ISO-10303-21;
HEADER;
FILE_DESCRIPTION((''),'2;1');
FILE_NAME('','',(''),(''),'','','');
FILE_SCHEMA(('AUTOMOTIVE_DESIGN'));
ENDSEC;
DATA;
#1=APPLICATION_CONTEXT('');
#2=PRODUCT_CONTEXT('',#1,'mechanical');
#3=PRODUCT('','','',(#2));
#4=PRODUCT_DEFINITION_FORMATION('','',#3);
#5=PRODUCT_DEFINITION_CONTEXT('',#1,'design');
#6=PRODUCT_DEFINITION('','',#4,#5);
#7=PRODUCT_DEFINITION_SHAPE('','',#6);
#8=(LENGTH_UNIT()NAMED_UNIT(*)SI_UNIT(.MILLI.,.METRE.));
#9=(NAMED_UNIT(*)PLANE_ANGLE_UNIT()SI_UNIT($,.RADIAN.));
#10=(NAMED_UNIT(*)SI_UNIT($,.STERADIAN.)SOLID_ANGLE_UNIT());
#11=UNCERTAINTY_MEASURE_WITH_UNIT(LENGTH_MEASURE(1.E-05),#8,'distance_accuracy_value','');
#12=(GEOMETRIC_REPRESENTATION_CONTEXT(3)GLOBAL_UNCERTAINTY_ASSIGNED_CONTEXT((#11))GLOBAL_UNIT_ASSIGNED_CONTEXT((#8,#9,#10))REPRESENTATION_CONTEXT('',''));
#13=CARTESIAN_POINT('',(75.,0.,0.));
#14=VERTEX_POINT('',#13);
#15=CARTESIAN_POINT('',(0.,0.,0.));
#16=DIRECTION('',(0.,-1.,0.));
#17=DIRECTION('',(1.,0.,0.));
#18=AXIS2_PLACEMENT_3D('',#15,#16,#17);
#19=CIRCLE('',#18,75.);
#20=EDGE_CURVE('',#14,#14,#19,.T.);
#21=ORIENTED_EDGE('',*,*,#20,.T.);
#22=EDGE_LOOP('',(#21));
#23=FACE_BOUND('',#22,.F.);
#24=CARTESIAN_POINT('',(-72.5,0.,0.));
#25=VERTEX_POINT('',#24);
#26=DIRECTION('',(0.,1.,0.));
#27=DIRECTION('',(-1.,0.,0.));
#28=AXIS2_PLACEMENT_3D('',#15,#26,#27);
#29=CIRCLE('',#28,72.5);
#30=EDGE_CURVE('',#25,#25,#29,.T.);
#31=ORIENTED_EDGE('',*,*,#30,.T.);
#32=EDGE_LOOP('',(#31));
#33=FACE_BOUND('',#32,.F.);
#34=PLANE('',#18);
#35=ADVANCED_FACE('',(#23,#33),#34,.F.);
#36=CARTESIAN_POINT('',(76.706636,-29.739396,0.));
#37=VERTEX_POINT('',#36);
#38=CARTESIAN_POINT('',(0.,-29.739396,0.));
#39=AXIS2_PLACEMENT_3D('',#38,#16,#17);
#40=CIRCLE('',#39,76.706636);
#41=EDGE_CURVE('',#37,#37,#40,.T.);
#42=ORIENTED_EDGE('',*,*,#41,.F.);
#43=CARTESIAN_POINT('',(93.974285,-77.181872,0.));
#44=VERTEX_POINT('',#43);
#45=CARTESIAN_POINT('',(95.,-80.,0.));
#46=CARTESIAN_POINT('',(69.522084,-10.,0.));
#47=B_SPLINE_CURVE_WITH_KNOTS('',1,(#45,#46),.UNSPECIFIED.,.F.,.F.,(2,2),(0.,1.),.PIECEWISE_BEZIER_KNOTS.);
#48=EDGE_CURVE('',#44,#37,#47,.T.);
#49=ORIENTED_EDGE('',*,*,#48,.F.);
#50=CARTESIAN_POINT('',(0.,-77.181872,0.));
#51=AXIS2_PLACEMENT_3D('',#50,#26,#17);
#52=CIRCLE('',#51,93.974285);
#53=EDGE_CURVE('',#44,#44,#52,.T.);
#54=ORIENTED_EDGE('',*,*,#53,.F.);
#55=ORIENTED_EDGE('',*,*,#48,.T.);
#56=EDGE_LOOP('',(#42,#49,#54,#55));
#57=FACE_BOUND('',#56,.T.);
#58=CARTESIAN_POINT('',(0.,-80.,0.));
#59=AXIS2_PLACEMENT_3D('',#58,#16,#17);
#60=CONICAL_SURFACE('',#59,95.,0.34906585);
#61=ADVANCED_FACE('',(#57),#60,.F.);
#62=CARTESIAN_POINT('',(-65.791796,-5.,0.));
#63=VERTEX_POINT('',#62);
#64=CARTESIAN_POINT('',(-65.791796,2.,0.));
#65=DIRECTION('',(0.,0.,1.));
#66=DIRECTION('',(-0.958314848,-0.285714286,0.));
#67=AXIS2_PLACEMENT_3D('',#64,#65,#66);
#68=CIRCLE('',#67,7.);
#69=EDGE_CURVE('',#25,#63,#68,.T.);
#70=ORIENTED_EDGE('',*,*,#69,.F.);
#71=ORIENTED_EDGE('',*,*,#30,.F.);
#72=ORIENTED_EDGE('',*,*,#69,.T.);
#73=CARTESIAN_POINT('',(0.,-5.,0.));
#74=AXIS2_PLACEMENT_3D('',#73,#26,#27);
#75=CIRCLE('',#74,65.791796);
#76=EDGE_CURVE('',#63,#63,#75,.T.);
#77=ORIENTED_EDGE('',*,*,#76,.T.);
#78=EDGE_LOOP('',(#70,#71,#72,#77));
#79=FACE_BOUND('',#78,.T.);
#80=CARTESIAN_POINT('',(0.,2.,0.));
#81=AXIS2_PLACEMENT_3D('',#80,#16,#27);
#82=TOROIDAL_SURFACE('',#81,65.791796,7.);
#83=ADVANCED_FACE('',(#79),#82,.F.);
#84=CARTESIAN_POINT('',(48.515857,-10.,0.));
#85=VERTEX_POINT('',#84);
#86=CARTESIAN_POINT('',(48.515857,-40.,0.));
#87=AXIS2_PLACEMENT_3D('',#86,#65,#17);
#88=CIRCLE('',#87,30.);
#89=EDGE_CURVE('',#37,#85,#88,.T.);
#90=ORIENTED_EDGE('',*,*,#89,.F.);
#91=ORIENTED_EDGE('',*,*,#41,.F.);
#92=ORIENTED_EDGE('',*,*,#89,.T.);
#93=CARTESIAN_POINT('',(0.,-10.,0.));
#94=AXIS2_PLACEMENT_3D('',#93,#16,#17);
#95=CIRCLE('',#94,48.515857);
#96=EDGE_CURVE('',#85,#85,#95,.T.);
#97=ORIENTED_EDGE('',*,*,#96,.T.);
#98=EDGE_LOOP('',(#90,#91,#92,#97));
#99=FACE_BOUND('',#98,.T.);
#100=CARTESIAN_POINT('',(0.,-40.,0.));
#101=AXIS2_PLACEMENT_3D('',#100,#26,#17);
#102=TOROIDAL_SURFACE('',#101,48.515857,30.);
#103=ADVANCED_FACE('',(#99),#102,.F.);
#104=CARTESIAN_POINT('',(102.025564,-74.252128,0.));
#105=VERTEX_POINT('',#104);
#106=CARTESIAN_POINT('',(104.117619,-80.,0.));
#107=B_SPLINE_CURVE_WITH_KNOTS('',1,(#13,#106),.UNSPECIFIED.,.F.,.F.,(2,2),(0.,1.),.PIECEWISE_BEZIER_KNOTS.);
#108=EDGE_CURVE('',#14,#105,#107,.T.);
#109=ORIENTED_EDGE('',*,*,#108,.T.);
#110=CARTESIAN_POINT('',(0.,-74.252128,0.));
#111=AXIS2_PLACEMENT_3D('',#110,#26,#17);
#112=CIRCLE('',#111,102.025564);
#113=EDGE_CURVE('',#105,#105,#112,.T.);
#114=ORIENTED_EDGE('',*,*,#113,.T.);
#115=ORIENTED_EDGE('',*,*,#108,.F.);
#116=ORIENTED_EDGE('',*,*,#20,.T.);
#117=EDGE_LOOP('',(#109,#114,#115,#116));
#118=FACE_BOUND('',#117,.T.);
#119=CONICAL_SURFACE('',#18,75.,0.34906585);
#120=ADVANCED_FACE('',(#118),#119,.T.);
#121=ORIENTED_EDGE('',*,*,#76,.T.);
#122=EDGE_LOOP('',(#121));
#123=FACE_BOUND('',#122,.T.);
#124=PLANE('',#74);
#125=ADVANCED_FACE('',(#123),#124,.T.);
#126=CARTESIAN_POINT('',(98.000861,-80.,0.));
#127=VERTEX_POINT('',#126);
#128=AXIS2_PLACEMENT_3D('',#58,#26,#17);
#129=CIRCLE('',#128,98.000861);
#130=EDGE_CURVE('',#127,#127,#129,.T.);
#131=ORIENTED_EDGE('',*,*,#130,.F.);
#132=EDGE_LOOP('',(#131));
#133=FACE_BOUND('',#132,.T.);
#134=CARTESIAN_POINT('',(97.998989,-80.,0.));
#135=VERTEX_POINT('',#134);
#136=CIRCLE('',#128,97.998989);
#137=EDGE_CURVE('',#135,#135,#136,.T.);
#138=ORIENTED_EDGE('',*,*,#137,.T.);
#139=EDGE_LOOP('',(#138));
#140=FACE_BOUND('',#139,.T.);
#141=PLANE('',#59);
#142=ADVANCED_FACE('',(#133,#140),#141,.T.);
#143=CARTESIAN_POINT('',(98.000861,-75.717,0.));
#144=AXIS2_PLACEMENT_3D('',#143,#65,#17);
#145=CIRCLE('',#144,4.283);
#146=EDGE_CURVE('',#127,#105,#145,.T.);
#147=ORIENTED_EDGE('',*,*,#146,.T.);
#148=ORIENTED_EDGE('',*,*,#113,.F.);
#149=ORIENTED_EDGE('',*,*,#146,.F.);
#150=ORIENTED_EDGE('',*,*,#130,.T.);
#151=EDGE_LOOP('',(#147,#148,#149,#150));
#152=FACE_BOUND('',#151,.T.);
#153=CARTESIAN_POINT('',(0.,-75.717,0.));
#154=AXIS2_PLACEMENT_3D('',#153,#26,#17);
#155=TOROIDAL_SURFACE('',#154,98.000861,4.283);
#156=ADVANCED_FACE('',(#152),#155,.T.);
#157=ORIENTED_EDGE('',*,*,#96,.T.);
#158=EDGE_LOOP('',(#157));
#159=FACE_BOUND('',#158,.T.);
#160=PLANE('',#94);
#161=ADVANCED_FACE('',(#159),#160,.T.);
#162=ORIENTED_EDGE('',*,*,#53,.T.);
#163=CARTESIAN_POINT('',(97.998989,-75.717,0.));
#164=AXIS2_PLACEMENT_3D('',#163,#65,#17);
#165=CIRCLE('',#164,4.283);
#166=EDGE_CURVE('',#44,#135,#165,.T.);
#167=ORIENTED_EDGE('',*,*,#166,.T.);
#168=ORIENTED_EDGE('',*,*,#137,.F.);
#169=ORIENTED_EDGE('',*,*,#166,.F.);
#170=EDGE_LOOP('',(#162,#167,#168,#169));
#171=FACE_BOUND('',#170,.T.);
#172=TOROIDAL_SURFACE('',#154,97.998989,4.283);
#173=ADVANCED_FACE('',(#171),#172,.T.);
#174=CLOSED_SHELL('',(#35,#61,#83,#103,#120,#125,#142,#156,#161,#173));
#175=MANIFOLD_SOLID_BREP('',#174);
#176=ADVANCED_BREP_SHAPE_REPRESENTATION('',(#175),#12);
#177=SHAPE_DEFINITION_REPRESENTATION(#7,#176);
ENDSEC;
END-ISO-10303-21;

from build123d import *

# Parameters (mm, degrees)
F0_R     = 75
F1_DEPTH = 80
F1_TAPER = -20
F2_R     = 95
F3_DEPTH = 70
F3_TAPER = 20
F4_R     = 30
F5_R     = 4.283
F6_R     = 72.5
F7_DEPTH = 5


# Not quite as in the source:
# - a fillet or chamfer that OpenCascade refuses, or shapes differently, is made with other operations: its cross-section is extruded or revolved along the edge and cut away or added


with BuildPart() as f1:
    # F0 (on Front) → F1 (new body)
    with BuildSketch(Plane.XZ):
        Circle(F0_R)
    extrude(amount=F1_DEPTH, taper=F1_TAPER)

    # F2 (on face) → F3 (cut)
    with BuildSketch(Plane.XZ.offset(80)):
        Circle(F2_R)
    extrude(amount=-F3_DEPTH, taper=F3_TAPER, mode=Mode.SUBTRACT)

    # F4
    f4_edges = [f1.edges().sort_by_distance(p)[0] for p in [
        (-69.522084, -10, 0),
    ]]
    fillet(f4_edges, radius=F4_R)

    # F5
    f5_edges = [f1.edges().sort_by_distance(p)[0] for p in [
        (-95, -80, 0),
        (-104.117619, -80, 0),
    ]]
    fillet(f5_edges, radius=F5_R)

    # F6 (on face) → F7 (cut)
    with BuildSketch(Plane(origin=(0, 0, 0), x_dir=(-1, 0, 0), z_dir=(0, 1, 0))):
        Circle(F6_R)
    extrude(amount=-F7_DEPTH, mode=Mode.SUBTRACT)

    # F8: fillet of radius 7 on 1 edges, made by hand

    # F8_s1 → F8_t2 (revolve)
    with BuildSketch(Plane.XY):
        with BuildLine():
            ThreePointArc((-72.5, 0), (-69.9750962002, -3.6124860802), (-65.7917960675, -5))
            Line((-65.7917960675, -5), (-72.5, -5))
            Line((-72.5, -5), (-72.5, 0))
        make_face()
    revolve(axis=Axis((0, -5, 0), (0, 1, 0)))


solid = f1.part
